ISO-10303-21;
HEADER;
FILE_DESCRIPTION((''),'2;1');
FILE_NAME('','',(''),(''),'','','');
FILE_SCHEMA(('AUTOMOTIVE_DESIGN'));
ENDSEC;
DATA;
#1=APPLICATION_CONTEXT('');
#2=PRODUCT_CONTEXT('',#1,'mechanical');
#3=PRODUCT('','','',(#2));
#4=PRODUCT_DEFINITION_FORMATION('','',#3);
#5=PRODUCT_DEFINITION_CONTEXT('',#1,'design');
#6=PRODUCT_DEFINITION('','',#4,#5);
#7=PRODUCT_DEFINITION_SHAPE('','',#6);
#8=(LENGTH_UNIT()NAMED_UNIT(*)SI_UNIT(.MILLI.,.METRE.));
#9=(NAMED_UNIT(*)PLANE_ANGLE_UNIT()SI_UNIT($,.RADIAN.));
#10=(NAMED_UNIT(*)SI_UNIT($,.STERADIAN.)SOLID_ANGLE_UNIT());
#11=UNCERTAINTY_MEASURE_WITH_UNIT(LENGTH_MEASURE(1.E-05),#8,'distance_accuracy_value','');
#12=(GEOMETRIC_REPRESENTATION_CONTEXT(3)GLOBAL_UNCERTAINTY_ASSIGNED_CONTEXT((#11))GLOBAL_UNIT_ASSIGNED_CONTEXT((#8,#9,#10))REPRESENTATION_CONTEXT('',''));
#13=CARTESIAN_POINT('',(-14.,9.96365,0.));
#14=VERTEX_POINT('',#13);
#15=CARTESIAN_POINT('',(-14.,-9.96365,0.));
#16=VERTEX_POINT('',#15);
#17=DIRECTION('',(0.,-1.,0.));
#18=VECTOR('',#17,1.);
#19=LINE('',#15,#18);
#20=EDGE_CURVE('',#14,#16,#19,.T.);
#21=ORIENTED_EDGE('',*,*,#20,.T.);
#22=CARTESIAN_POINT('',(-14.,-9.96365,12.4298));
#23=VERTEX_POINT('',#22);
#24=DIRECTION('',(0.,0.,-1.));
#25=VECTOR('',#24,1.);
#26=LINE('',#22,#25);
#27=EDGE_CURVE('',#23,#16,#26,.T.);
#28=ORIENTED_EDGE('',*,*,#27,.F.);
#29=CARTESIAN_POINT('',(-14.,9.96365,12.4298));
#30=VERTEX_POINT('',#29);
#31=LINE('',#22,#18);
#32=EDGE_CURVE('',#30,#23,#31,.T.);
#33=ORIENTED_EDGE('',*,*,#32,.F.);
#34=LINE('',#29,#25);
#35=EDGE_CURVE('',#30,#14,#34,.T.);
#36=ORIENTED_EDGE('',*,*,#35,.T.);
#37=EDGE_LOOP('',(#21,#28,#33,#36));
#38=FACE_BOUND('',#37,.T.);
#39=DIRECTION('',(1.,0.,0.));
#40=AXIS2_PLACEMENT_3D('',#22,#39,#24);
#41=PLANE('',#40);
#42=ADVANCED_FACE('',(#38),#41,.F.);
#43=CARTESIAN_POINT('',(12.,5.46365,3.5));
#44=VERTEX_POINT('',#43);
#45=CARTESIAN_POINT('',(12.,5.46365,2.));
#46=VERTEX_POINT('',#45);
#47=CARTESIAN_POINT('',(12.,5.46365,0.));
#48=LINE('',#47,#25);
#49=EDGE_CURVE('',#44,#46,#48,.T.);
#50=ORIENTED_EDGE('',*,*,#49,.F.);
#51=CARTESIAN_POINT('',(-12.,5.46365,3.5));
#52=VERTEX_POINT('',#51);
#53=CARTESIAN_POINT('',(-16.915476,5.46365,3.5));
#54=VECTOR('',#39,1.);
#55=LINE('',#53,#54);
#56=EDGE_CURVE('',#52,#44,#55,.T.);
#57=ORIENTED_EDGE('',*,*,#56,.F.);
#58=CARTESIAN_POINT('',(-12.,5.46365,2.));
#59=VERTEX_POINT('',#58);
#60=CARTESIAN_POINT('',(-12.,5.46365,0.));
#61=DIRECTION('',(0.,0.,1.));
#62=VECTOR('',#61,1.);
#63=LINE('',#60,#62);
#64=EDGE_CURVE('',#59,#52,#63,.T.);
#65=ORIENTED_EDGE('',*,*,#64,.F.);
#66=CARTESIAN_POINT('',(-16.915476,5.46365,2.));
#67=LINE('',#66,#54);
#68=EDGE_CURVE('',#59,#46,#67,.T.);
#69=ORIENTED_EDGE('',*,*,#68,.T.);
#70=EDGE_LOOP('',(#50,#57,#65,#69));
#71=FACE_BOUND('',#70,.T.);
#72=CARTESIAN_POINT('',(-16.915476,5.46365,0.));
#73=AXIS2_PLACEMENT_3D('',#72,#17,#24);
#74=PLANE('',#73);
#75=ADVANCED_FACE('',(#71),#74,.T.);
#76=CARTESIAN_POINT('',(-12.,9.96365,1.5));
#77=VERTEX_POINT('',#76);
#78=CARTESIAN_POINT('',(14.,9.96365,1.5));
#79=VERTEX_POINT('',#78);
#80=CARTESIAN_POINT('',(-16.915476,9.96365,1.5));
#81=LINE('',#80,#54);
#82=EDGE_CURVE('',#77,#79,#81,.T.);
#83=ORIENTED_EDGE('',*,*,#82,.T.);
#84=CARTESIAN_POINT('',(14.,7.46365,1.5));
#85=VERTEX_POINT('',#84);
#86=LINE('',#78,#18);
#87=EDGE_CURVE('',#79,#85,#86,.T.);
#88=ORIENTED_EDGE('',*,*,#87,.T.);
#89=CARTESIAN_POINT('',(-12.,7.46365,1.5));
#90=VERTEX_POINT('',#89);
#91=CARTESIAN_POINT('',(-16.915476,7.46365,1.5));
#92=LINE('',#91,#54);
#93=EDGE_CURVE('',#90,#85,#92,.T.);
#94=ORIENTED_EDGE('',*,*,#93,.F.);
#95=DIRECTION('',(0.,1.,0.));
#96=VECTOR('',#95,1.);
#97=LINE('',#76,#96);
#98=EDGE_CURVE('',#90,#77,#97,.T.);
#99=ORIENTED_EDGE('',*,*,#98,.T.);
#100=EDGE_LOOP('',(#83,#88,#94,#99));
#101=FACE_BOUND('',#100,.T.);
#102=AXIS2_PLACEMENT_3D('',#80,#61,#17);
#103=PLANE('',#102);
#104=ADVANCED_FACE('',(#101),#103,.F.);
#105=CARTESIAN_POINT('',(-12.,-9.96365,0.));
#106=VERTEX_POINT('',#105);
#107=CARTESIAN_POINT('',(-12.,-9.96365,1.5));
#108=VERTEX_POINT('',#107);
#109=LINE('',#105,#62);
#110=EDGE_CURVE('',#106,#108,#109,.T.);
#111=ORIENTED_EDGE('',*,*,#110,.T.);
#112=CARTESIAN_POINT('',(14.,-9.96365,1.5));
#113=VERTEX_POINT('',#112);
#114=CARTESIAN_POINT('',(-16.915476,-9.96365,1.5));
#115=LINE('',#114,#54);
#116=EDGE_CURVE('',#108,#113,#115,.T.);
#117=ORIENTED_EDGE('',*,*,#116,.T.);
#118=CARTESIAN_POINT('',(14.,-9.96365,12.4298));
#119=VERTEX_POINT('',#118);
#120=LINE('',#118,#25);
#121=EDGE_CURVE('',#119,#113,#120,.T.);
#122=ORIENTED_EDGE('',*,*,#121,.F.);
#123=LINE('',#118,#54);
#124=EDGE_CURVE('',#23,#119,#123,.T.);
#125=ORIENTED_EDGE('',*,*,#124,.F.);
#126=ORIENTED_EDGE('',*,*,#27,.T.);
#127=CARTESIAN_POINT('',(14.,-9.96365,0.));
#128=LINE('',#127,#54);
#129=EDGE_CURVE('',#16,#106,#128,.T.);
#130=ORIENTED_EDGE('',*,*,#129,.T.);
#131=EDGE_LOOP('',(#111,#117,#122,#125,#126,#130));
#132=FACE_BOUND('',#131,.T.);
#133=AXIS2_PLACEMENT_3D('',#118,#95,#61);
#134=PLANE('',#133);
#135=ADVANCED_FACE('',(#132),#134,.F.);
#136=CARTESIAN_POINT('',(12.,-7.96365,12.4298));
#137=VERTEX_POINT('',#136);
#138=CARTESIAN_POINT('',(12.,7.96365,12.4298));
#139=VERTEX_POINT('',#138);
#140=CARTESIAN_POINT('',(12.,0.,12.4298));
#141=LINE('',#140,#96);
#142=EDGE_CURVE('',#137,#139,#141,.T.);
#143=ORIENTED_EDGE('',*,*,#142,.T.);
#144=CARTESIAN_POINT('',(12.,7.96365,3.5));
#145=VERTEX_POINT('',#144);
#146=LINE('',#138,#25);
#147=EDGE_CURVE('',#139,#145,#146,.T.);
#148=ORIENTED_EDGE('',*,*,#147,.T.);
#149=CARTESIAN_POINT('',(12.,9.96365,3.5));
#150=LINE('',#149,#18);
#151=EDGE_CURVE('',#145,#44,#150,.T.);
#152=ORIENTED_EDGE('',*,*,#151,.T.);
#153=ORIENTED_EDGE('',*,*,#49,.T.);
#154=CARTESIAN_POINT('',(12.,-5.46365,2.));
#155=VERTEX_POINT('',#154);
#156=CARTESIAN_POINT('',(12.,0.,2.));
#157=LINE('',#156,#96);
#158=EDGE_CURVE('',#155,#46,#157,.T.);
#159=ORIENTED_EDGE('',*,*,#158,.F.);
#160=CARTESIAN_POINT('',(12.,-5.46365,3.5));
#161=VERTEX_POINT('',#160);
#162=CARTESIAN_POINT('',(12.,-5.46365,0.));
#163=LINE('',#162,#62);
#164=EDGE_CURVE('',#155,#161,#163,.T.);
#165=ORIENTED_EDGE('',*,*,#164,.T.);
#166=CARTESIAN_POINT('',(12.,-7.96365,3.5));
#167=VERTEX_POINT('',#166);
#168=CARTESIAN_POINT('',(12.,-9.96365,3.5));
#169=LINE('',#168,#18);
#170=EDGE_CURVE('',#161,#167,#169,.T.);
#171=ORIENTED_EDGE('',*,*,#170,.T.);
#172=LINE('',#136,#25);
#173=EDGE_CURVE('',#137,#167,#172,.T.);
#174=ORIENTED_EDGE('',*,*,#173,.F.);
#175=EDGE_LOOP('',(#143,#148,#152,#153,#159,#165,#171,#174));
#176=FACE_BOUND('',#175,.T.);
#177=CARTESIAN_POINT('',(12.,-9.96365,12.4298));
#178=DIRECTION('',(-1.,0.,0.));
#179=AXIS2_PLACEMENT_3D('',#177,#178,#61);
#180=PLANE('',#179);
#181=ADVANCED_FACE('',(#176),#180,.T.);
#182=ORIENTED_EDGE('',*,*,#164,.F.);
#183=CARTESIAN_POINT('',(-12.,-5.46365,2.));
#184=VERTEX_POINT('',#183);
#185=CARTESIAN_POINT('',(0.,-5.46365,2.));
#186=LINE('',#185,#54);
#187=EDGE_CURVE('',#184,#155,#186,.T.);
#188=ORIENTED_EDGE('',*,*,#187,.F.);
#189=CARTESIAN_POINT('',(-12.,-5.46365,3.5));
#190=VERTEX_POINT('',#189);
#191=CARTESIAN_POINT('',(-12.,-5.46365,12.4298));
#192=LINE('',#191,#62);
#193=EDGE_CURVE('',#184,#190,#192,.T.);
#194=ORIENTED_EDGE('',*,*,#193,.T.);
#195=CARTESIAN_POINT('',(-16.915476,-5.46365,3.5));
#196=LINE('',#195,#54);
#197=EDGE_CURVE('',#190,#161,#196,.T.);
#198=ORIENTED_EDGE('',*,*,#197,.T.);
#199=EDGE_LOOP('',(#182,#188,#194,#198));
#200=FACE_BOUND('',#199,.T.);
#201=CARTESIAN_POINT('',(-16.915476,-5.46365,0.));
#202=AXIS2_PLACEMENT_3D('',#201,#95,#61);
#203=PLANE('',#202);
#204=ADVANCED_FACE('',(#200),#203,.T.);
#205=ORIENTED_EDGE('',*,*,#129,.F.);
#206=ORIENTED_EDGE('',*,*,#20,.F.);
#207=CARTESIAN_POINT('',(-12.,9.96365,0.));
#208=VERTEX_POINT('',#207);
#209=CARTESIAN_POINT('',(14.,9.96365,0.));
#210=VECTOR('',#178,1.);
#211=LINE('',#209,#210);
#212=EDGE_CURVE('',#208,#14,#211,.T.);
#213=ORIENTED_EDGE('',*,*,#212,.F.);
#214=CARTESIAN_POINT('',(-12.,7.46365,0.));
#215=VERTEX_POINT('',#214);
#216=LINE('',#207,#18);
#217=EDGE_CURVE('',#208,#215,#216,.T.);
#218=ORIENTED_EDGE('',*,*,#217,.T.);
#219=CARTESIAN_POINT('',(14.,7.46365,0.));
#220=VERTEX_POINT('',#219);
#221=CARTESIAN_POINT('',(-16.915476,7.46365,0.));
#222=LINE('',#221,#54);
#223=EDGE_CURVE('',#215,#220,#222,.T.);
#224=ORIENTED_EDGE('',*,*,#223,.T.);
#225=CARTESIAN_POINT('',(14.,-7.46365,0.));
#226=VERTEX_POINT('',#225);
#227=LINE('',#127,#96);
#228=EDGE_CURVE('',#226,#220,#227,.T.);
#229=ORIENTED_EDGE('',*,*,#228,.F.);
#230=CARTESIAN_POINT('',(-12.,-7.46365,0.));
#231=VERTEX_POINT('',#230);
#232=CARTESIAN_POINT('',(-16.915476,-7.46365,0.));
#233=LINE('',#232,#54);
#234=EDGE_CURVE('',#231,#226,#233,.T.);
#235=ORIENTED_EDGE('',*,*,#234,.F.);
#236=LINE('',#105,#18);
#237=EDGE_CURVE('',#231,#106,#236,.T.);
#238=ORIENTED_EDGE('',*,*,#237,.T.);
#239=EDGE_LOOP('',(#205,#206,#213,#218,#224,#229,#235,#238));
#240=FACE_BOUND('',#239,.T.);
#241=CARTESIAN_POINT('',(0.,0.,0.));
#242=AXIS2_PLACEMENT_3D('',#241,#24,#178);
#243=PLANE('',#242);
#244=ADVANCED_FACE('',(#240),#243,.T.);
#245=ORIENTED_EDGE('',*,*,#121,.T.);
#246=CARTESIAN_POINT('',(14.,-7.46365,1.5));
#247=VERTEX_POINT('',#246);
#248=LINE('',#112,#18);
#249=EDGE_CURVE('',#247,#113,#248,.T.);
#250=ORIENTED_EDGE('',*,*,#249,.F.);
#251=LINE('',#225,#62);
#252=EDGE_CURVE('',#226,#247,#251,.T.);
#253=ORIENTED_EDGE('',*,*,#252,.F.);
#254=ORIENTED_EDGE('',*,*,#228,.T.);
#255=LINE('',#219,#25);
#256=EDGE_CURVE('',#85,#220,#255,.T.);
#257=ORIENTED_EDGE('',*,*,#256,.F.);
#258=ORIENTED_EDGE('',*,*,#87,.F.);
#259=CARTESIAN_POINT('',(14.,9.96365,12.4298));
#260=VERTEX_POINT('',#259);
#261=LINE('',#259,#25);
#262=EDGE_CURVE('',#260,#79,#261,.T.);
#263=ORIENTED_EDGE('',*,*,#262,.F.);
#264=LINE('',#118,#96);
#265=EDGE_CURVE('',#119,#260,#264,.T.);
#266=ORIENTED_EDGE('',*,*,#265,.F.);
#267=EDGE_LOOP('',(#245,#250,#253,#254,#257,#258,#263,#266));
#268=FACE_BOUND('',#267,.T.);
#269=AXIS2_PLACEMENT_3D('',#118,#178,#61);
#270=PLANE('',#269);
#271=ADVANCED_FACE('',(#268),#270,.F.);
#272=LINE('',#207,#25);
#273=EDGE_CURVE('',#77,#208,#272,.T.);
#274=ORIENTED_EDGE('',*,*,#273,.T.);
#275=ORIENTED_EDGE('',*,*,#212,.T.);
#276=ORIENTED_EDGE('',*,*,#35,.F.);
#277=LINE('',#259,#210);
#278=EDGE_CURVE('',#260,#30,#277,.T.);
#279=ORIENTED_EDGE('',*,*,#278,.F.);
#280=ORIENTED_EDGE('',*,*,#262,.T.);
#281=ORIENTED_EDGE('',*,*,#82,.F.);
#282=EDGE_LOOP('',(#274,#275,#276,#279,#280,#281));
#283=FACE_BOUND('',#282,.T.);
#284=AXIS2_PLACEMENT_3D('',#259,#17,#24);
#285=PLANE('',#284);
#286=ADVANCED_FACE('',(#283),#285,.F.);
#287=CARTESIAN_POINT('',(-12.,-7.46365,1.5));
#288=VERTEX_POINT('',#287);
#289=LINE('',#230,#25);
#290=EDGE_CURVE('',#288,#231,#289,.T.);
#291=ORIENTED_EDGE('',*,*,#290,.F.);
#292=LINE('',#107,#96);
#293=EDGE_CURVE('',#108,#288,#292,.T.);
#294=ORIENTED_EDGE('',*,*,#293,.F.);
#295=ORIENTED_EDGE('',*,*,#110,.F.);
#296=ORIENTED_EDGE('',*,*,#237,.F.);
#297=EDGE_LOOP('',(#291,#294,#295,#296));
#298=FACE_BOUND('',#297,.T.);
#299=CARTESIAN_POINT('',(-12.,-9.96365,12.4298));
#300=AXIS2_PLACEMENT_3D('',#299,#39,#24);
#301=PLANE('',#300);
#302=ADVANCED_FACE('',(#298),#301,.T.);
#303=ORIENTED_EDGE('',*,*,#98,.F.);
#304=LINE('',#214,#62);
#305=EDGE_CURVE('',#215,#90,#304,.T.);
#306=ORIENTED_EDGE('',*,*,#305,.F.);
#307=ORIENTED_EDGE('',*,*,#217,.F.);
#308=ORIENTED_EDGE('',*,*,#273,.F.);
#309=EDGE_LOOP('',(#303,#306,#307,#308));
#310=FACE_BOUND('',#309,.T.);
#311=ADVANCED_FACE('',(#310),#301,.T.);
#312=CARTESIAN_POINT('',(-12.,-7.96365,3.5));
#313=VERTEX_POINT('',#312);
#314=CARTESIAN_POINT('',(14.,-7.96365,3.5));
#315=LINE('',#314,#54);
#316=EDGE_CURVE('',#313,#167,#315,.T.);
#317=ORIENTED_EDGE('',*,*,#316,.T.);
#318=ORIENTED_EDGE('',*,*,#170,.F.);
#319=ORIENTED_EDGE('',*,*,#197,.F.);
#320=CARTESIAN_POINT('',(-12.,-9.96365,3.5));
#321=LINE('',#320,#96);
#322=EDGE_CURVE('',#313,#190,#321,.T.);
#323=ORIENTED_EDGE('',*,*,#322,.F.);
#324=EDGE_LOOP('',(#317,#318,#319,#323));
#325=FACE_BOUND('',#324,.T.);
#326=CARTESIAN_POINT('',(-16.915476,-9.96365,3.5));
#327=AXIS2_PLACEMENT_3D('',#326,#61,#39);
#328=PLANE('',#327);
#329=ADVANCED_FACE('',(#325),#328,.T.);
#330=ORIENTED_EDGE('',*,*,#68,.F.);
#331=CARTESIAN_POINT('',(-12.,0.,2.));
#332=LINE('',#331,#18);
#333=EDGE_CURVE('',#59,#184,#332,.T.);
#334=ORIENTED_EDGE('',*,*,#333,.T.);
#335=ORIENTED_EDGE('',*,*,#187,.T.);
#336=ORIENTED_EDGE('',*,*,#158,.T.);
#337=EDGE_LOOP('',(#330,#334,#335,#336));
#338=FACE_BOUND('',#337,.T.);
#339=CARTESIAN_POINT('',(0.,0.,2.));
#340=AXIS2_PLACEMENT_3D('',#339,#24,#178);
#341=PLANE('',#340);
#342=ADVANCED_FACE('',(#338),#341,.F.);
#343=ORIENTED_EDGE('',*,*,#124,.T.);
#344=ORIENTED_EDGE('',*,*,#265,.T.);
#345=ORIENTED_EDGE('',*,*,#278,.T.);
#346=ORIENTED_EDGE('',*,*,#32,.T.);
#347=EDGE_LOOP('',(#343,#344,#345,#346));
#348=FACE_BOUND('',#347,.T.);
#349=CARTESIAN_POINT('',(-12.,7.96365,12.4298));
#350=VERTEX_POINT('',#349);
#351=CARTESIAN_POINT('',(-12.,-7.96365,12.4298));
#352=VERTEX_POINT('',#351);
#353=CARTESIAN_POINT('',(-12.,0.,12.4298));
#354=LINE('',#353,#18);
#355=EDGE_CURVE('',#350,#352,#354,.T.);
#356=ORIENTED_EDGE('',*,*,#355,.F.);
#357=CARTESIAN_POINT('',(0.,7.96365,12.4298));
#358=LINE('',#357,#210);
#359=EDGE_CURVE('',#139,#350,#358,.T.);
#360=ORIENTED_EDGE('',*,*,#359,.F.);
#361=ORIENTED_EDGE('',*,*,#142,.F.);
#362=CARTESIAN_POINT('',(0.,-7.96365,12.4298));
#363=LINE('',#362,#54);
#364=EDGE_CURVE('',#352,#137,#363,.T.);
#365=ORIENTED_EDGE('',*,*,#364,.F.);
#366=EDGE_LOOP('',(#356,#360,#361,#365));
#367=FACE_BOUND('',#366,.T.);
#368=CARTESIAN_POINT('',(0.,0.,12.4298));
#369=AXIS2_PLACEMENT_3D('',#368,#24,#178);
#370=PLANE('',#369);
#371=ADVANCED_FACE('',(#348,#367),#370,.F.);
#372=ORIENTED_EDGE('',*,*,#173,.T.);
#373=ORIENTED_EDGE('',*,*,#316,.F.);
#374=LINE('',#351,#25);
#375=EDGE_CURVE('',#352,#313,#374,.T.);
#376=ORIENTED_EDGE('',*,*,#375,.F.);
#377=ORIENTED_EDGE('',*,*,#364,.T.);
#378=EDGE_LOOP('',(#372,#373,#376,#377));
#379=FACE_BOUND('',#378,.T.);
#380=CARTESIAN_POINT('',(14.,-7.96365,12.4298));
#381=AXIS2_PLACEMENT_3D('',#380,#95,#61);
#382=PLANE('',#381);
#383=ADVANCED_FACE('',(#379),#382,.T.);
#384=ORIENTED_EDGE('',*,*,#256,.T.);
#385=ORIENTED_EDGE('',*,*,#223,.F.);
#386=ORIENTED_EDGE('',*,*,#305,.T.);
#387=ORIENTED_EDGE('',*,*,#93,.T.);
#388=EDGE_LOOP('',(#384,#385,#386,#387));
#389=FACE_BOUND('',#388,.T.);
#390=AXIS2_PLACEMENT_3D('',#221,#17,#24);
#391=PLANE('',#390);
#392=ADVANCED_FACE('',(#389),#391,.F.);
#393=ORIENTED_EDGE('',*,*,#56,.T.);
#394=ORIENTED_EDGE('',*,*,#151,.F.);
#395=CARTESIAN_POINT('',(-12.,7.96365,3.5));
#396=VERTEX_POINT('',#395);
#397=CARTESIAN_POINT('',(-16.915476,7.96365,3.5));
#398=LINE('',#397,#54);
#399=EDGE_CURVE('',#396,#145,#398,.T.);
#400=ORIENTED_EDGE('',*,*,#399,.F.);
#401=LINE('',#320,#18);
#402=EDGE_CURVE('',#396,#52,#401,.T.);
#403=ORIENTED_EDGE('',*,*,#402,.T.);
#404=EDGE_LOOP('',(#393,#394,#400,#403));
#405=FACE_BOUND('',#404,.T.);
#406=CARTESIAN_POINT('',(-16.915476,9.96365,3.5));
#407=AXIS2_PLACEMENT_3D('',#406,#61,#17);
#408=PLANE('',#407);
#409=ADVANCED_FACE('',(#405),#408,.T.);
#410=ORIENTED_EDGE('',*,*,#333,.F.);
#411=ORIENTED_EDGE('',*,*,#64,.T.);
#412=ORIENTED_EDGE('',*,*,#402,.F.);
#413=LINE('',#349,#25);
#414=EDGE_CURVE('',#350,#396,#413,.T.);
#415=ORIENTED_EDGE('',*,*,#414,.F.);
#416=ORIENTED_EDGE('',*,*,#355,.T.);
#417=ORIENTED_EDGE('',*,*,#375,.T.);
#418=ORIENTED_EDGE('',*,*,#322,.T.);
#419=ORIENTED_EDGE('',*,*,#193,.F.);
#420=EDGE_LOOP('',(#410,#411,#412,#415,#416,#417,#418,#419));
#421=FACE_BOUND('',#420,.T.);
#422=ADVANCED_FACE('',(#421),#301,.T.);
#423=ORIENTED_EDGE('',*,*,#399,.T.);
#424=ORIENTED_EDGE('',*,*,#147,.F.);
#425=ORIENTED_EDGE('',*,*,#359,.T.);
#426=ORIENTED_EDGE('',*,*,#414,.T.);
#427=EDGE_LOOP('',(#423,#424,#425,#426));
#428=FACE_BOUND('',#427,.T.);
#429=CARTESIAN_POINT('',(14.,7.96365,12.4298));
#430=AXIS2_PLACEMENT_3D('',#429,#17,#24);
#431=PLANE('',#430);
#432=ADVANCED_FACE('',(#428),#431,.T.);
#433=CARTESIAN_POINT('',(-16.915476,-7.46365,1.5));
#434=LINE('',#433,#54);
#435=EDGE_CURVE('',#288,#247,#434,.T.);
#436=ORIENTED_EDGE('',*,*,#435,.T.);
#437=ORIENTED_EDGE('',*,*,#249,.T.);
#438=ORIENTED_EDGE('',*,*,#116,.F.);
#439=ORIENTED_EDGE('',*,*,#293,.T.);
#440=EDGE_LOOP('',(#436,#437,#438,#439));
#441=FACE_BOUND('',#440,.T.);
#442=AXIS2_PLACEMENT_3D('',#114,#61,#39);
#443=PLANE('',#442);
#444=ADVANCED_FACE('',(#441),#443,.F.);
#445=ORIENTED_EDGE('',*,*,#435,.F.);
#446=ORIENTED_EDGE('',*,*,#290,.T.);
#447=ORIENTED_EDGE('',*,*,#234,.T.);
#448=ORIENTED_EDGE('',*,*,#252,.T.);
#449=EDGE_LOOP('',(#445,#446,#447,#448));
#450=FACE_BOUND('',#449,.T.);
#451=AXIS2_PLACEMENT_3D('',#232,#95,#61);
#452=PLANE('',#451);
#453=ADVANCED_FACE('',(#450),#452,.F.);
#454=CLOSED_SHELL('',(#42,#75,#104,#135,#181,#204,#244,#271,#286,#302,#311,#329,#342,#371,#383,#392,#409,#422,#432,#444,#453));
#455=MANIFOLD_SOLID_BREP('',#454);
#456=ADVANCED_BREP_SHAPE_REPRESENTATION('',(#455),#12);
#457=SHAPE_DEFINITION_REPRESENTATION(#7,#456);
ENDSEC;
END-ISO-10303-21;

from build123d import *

# Parameters (mm, degrees)
SKETCH2_W           = 19.9273
SKETCH2_H           = 28
BOSS_EXTRUDE1_DEPTH = 12.4298
SKETCH3_W           = 2.5
SKETCH3_H           = 1.5
CUT_EXTRUDE1_DEPTH  = 26
SHELL1_START        = -12
SHELL1_DEPTH        = 24


# Read off the part's stored shape, not the designer's step: Shell1
with BuildPart() as part:
    # Sketch2 → Boss-Extrude1 (new body)
    with BuildSketch(Plane(origin=(0, 0, 0), x_dir=(0, 1, 0), z_dir=(0, 0, 1))):
        Rectangle(SKETCH2_W, SKETCH2_H)
    extrude(amount=BOSS_EXTRUDE1_DEPTH)

    # Sketch3 → Cut-Extrude1 (cut)
    with BuildSketch(Plane.YZ.offset(14)):
        with Locations((-8.71365, 0.75)):
            Rectangle(SKETCH3_W, SKETCH3_H)
        with Locations((8.71365, 0.75)):
            Rectangle(SKETCH3_W, SKETCH3_H)
    extrude(amount=-CUT_EXTRUDE1_DEPTH, mode=Mode.SUBTRACT)

    # Shell1 outline → Shell1 (cut)
    with BuildSketch(Plane.YZ.offset(SHELL1_START)):
        Polygon((7.96365, 3.5), (7.96365, 12.4298), (-7.96365, 12.4298), (-7.96365, 3.5), (-5.46365, 3.5), (-5.46365, 2), (5.46365, 2), (5.46365, 3.5), align=None)
    extrude(amount=SHELL1_DEPTH, mode=Mode.SUBTRACT)


solid = part.part
